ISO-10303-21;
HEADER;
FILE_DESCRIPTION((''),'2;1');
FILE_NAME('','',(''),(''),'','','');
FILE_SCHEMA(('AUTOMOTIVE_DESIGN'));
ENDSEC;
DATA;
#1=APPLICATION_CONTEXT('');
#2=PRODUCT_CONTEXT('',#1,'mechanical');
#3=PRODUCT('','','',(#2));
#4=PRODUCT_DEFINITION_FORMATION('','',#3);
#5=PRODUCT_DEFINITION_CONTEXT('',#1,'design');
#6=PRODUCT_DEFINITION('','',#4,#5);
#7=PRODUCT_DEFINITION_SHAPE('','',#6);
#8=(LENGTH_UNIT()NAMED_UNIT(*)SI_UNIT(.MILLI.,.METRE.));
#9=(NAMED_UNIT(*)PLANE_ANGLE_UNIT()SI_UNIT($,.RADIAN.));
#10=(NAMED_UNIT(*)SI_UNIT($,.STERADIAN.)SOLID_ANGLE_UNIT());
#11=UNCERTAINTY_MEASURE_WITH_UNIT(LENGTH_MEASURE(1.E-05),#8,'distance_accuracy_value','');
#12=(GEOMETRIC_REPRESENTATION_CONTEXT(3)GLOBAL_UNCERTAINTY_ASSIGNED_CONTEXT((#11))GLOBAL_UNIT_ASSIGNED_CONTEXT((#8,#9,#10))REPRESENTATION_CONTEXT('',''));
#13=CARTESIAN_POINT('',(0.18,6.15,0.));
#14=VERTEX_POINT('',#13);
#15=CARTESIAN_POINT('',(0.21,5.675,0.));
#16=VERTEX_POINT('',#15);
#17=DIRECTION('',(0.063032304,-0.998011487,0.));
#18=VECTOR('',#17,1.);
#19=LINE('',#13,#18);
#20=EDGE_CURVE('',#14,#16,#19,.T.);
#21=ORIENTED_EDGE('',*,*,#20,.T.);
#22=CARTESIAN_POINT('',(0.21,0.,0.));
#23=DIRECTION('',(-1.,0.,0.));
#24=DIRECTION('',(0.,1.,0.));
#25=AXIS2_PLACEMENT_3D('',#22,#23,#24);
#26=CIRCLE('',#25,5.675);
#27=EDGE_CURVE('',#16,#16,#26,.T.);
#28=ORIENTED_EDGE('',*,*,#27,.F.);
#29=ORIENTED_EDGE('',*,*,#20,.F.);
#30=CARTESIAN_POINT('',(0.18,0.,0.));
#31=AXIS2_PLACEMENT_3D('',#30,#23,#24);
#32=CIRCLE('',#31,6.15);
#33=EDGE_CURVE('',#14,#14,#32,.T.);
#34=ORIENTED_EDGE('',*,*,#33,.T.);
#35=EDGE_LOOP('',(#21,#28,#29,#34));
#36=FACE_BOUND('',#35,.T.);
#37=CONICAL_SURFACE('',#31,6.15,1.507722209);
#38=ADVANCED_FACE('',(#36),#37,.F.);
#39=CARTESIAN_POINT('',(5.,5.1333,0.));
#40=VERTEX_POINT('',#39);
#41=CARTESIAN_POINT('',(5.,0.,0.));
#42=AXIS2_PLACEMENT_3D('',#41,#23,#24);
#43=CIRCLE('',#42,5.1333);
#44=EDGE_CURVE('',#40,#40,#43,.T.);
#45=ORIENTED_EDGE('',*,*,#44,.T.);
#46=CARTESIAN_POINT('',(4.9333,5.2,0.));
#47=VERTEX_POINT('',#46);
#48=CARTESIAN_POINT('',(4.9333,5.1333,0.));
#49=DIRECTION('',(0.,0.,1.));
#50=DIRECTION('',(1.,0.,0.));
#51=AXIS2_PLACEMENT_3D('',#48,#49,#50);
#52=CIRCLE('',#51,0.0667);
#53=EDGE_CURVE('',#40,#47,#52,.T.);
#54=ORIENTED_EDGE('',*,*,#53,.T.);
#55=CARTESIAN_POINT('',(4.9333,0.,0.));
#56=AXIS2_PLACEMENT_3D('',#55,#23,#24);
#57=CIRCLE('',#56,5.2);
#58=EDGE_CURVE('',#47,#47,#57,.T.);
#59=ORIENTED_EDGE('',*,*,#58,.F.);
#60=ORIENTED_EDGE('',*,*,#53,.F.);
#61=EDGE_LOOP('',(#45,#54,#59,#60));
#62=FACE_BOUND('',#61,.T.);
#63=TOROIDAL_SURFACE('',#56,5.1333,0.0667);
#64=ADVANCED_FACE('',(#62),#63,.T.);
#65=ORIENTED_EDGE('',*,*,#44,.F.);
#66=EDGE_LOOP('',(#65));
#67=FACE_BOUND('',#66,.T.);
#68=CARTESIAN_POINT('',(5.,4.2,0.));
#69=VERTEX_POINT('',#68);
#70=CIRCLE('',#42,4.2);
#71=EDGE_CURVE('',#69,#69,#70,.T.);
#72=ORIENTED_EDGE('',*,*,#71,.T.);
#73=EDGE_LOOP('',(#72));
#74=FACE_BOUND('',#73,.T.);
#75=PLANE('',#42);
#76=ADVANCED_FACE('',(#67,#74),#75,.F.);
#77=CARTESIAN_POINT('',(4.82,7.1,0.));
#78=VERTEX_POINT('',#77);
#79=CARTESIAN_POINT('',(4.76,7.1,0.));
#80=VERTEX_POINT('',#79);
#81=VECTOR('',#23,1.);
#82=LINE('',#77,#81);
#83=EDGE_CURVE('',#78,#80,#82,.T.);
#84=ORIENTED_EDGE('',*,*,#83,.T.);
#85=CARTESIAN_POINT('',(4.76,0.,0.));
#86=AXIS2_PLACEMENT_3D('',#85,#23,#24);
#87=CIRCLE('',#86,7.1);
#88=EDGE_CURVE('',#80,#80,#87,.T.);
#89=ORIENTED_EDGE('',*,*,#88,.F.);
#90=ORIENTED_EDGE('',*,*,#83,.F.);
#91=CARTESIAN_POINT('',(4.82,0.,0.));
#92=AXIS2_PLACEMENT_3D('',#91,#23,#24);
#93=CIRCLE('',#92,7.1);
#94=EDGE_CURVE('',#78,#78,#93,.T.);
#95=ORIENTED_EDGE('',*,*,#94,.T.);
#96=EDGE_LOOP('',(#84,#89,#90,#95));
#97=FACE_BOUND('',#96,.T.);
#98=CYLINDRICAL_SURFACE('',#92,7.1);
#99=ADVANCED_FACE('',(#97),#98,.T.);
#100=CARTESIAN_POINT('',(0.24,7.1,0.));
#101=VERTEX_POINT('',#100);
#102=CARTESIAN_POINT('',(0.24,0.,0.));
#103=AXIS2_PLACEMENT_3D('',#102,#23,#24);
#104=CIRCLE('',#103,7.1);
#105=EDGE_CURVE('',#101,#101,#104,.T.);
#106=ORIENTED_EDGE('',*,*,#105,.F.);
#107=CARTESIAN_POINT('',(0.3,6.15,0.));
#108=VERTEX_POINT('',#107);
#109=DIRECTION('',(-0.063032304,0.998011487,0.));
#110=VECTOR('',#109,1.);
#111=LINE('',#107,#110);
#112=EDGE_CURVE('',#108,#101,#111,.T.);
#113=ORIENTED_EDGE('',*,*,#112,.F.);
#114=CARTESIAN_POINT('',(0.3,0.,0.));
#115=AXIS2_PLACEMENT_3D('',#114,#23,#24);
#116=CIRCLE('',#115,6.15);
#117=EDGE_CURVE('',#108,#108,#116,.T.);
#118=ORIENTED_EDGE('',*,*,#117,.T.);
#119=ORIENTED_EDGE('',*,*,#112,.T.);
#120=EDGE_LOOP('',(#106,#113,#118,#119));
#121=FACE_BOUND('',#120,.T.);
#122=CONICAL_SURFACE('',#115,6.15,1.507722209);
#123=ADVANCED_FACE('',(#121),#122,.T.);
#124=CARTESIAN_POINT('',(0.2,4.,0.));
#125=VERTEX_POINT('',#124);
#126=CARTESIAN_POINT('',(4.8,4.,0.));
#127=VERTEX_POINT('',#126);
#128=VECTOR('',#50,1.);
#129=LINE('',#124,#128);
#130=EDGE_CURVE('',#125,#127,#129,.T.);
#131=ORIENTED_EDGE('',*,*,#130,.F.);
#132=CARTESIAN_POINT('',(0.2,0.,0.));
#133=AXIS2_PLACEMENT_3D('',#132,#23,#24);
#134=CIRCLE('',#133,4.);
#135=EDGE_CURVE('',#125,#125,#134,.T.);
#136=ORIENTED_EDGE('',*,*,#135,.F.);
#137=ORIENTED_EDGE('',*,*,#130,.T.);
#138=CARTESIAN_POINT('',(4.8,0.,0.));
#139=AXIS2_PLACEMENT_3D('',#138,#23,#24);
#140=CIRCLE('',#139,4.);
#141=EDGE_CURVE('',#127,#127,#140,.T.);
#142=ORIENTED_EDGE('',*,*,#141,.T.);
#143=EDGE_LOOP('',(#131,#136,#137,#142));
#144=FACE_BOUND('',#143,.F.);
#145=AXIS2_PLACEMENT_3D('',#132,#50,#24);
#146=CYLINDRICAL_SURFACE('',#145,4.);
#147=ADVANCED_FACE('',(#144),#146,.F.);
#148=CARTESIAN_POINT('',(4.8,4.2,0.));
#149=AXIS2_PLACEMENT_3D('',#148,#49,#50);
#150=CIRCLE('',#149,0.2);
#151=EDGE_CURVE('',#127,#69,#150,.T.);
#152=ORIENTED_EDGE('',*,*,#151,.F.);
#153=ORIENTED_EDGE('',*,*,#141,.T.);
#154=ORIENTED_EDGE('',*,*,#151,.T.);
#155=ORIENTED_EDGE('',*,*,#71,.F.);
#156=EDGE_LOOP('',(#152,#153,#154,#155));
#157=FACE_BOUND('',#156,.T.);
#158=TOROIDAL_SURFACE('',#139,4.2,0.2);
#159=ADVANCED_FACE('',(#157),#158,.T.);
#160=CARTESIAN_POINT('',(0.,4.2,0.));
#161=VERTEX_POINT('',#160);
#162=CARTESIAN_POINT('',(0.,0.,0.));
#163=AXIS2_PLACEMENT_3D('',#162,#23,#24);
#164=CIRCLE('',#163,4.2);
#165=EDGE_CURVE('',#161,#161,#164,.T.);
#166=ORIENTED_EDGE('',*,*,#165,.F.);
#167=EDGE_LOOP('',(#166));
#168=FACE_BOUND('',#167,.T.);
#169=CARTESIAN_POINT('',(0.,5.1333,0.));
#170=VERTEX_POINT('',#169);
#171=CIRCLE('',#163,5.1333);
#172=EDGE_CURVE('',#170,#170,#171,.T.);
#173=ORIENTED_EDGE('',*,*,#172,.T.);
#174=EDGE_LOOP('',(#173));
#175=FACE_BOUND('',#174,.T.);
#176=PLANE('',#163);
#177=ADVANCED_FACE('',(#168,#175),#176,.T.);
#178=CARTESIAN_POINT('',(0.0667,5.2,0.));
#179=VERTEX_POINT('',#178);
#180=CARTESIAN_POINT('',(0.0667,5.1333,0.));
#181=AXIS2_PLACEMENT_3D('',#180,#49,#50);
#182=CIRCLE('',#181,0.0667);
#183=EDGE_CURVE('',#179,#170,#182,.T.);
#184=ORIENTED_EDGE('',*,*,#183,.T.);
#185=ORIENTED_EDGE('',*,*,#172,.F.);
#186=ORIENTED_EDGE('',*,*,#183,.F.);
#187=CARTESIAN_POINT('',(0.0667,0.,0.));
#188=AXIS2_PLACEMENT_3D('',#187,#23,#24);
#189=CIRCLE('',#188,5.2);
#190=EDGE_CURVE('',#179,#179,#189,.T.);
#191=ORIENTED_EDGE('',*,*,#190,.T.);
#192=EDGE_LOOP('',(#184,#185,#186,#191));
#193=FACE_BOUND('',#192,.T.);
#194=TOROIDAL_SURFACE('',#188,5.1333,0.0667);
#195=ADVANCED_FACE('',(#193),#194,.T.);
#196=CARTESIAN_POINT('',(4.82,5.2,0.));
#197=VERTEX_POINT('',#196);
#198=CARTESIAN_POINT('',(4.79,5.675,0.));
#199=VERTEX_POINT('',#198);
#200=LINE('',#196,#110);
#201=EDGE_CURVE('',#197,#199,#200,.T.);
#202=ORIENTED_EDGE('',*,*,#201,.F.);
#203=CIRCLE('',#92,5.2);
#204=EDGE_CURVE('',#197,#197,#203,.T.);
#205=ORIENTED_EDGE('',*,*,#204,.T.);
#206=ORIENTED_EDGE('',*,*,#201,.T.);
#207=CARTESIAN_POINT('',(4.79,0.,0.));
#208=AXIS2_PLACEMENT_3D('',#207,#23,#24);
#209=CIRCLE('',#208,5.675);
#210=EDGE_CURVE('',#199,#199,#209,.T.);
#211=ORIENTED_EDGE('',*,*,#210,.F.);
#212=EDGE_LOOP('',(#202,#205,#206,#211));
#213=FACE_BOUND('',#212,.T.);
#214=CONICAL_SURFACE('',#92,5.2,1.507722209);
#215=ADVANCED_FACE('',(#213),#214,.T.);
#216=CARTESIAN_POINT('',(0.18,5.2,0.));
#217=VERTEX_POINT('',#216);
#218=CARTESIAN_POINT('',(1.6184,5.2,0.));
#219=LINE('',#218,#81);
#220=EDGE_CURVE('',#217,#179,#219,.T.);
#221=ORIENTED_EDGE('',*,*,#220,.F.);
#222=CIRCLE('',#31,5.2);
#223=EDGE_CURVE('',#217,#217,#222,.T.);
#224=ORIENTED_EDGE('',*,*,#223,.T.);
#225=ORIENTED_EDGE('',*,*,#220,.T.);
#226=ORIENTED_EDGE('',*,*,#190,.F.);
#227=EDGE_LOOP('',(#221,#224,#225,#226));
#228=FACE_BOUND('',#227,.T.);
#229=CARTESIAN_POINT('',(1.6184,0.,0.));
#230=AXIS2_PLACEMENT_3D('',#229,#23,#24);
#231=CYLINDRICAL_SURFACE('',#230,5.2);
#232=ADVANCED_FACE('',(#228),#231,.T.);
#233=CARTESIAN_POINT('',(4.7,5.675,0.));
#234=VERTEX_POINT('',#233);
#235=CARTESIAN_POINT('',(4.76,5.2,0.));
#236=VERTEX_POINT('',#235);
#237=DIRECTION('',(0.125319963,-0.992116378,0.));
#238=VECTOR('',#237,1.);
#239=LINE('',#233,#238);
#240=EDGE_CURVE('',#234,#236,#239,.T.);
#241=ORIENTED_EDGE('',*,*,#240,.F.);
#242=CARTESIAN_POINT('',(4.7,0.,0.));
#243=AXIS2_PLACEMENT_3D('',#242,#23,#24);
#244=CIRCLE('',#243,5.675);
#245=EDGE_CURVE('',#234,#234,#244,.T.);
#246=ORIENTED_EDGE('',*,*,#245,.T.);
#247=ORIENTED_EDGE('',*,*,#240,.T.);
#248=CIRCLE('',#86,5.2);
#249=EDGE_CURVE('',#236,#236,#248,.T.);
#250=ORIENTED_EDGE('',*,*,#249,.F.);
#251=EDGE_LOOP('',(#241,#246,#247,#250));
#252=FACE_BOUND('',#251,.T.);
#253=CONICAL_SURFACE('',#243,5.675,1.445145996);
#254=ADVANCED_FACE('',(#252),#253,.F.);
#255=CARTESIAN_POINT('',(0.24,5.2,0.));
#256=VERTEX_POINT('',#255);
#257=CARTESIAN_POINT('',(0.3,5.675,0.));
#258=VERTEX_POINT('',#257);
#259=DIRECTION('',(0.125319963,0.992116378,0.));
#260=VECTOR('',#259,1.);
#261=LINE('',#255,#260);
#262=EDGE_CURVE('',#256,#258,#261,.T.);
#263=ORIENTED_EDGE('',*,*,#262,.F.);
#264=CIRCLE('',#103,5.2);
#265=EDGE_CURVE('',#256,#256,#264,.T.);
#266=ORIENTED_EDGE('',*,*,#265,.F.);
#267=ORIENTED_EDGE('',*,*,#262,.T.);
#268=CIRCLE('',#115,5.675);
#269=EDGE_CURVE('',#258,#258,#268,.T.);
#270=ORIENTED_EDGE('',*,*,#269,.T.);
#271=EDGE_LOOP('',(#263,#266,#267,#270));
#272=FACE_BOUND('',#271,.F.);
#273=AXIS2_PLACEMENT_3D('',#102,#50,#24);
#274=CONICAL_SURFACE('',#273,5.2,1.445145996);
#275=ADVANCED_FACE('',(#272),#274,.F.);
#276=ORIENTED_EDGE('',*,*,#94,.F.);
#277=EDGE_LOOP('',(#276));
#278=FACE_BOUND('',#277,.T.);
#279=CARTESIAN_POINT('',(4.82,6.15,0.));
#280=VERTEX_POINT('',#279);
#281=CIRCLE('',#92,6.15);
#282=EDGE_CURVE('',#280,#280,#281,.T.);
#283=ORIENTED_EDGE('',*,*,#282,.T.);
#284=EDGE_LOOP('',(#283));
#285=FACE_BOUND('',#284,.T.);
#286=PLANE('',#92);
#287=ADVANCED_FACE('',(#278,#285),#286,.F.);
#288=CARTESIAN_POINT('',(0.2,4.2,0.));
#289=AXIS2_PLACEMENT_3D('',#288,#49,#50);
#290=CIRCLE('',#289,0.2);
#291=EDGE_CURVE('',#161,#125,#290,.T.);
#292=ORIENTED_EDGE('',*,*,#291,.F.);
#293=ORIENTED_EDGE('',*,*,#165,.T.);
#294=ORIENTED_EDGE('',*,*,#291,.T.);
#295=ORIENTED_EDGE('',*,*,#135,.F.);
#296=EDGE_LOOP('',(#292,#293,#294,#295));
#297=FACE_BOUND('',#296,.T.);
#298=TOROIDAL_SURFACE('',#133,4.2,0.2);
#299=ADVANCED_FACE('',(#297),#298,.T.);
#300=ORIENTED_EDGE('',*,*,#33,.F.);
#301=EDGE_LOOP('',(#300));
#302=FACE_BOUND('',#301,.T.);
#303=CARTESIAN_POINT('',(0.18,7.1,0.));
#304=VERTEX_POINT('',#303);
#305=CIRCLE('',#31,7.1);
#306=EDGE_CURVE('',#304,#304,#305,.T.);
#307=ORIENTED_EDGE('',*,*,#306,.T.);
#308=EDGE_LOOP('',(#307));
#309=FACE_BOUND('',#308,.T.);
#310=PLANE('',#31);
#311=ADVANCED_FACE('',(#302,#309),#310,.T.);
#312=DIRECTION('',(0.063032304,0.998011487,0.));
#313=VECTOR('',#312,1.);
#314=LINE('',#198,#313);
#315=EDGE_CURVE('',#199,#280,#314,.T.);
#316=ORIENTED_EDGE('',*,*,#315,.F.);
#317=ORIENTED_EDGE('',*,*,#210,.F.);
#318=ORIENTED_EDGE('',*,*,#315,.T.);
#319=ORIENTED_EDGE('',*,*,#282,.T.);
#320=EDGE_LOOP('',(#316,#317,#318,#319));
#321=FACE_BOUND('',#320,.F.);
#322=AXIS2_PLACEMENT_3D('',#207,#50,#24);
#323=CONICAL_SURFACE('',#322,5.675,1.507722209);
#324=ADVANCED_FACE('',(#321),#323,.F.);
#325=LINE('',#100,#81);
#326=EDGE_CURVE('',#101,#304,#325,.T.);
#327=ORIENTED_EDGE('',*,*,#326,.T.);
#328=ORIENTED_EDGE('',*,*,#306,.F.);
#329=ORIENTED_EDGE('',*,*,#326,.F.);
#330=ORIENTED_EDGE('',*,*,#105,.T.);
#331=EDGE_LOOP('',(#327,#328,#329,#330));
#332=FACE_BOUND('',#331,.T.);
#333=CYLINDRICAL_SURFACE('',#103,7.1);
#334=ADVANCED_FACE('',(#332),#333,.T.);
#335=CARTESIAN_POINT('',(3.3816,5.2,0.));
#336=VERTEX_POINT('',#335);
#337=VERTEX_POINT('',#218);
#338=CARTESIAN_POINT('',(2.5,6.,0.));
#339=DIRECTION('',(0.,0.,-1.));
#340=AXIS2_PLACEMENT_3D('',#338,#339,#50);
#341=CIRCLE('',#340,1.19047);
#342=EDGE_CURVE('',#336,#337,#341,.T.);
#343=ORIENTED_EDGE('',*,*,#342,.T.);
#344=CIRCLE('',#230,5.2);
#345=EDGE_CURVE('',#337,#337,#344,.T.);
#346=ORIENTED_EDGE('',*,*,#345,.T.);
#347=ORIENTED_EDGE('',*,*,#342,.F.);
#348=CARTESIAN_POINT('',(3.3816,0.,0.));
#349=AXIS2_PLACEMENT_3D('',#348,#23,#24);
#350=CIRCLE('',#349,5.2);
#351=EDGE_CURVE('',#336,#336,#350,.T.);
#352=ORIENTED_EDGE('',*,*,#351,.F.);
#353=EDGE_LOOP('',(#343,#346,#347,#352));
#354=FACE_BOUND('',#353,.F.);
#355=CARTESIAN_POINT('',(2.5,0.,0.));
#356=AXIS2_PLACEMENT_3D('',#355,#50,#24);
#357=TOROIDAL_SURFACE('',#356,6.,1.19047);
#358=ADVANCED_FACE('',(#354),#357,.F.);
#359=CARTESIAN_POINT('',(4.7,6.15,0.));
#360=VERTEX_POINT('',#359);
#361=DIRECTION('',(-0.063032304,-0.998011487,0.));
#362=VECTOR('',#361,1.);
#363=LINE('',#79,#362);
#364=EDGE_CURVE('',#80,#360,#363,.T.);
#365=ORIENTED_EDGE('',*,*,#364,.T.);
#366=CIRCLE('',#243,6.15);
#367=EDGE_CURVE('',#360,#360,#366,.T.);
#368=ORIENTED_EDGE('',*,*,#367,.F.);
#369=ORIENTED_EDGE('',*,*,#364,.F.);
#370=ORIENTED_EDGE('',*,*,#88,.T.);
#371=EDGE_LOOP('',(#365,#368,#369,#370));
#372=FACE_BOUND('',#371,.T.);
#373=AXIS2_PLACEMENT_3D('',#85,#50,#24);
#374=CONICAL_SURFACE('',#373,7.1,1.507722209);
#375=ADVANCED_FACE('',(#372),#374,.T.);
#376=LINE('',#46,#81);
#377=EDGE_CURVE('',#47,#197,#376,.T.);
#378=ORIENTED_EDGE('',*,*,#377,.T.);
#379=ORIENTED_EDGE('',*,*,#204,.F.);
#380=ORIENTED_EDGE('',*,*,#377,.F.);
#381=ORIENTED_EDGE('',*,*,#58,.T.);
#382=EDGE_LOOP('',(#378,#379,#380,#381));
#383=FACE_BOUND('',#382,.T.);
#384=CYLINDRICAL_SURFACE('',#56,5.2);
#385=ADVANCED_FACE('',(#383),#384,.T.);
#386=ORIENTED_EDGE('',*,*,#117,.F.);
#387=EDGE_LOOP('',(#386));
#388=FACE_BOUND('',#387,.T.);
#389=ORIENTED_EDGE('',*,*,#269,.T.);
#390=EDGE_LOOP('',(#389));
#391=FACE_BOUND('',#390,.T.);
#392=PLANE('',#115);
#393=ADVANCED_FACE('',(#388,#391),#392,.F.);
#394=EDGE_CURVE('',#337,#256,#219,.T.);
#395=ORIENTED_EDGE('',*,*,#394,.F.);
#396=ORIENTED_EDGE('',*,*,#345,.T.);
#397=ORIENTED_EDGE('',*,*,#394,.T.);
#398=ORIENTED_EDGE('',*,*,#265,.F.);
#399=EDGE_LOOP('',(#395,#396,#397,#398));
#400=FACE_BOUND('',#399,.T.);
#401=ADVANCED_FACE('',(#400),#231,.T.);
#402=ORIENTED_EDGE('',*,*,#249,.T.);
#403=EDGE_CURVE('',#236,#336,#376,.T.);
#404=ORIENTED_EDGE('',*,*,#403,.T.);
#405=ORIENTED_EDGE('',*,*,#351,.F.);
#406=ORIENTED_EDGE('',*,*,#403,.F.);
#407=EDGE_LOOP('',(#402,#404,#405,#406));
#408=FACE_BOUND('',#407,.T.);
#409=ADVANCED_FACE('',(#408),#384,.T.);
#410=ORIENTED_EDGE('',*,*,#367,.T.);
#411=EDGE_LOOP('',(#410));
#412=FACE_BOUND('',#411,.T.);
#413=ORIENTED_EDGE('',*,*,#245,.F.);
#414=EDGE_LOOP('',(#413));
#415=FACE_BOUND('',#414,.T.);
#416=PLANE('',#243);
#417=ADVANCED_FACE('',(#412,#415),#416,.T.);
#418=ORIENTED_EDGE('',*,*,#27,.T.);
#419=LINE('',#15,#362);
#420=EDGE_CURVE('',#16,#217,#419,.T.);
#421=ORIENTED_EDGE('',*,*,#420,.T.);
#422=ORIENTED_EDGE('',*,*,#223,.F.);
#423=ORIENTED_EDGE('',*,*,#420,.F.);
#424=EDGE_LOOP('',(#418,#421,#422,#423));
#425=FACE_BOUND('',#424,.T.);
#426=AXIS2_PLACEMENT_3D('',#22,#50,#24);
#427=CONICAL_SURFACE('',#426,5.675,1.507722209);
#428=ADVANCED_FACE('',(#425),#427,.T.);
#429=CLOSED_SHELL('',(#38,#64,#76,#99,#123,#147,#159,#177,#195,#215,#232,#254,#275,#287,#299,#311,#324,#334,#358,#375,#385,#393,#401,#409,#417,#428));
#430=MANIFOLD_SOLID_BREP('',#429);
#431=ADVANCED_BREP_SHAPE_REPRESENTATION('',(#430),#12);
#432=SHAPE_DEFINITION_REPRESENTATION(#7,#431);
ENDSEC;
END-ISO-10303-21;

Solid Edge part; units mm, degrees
sketch "Sketch1" plane through (0, 0, 0) normal (0, 0, 1) x (1, 0, 0)
  line L0 (0, 5.1333) -> (0, 4.2)
  arc A0 (0, 4.2) -> (0.2, 4) centre (0.2, 4.2) ccw
  line L1 (0.2, 4) -> (4.8, 4)
  arc A1 (4.8, 4) -> (5, 4.2) centre (4.8, 4.2) ccw
  line L2 (5, 4.2) -> (5, 5.1333)
  arc A2 (5, 5.1333) -> (4.9333, 5.2) centre (4.9333, 5.1333) ccw
  line L3 (4.9333, 5.2) -> (3.3816, 5.2)
  arc A3 (3.3816, 5.2) -> (1.6184, 5.2) centre (2.5, 6) cw
  line L4 (1.6184, 5.2) -> (0.0667, 5.2)
  arc A4 (0.0667, 5.2) -> (0, 5.1333) centre (0.0667, 5.1333) ccw
revolve "RevolvedProtrusion1" add sketch "Sketch1" angle 360 about axis through (50, 0, 0) along (-1, 0, 0)
sketch "Sketch2" plane through (0, 0, 0) normal (0, 0, 1) x (1, 0, 0)
  line L0 (0.18, 5.2) -> (0.24, 5.2)
  line L1 (0.24, 5.2) -> (0.3, 5.675)
  line L2 (0.3, 5.675) -> (0.3, 6.15)
  line L3 (0.3, 6.15) -> (0.24, 7.1)
  line L4 (0.24, 7.1) -> (0.18, 7.1)
  line L5 (0.18, 7.1) -> (0.18, 6.15)
  line L6 (0.18, 6.15) -> (0.21, 5.675)
  line L7 (0.21, 5.675) -> (0.18, 5.2)
revolve "RevolvedProtrusion2" add sketch "Sketch2" angle 360 about axis through (2, 0, 0) along (-1, 0, 0)
sketch "Sketch3" plane through (0, 0, 0) normal (0, 0, 1) x (1, 0, 0)
  line L0 (4.7, 6.15) -> (4.7, 5.675)
  line L1 (4.7, 5.675) -> (4.76, 5.2)
  line L2 (4.76, 5.2) -> (4.82, 5.2)
  line L3 (4.82, 5.2) -> (4.79, 5.675)
  line L4 (4.79, 5.675) -> (4.82, 6.15)
  line L5 (4.82, 6.15) -> (4.82, 7.1)
  line L6 (4.82, 7.1) -> (4.76, 7.1)
  line L7 (4.76, 7.1) -> (4.7, 6.15)
revolve "RevolvedProtrusion3" add sketch "Sketch3" angle 360 about axis through (2, 0, 0) along (-1, 0, 0)
properties part number "SKF_628/8-2RS1_ir"
